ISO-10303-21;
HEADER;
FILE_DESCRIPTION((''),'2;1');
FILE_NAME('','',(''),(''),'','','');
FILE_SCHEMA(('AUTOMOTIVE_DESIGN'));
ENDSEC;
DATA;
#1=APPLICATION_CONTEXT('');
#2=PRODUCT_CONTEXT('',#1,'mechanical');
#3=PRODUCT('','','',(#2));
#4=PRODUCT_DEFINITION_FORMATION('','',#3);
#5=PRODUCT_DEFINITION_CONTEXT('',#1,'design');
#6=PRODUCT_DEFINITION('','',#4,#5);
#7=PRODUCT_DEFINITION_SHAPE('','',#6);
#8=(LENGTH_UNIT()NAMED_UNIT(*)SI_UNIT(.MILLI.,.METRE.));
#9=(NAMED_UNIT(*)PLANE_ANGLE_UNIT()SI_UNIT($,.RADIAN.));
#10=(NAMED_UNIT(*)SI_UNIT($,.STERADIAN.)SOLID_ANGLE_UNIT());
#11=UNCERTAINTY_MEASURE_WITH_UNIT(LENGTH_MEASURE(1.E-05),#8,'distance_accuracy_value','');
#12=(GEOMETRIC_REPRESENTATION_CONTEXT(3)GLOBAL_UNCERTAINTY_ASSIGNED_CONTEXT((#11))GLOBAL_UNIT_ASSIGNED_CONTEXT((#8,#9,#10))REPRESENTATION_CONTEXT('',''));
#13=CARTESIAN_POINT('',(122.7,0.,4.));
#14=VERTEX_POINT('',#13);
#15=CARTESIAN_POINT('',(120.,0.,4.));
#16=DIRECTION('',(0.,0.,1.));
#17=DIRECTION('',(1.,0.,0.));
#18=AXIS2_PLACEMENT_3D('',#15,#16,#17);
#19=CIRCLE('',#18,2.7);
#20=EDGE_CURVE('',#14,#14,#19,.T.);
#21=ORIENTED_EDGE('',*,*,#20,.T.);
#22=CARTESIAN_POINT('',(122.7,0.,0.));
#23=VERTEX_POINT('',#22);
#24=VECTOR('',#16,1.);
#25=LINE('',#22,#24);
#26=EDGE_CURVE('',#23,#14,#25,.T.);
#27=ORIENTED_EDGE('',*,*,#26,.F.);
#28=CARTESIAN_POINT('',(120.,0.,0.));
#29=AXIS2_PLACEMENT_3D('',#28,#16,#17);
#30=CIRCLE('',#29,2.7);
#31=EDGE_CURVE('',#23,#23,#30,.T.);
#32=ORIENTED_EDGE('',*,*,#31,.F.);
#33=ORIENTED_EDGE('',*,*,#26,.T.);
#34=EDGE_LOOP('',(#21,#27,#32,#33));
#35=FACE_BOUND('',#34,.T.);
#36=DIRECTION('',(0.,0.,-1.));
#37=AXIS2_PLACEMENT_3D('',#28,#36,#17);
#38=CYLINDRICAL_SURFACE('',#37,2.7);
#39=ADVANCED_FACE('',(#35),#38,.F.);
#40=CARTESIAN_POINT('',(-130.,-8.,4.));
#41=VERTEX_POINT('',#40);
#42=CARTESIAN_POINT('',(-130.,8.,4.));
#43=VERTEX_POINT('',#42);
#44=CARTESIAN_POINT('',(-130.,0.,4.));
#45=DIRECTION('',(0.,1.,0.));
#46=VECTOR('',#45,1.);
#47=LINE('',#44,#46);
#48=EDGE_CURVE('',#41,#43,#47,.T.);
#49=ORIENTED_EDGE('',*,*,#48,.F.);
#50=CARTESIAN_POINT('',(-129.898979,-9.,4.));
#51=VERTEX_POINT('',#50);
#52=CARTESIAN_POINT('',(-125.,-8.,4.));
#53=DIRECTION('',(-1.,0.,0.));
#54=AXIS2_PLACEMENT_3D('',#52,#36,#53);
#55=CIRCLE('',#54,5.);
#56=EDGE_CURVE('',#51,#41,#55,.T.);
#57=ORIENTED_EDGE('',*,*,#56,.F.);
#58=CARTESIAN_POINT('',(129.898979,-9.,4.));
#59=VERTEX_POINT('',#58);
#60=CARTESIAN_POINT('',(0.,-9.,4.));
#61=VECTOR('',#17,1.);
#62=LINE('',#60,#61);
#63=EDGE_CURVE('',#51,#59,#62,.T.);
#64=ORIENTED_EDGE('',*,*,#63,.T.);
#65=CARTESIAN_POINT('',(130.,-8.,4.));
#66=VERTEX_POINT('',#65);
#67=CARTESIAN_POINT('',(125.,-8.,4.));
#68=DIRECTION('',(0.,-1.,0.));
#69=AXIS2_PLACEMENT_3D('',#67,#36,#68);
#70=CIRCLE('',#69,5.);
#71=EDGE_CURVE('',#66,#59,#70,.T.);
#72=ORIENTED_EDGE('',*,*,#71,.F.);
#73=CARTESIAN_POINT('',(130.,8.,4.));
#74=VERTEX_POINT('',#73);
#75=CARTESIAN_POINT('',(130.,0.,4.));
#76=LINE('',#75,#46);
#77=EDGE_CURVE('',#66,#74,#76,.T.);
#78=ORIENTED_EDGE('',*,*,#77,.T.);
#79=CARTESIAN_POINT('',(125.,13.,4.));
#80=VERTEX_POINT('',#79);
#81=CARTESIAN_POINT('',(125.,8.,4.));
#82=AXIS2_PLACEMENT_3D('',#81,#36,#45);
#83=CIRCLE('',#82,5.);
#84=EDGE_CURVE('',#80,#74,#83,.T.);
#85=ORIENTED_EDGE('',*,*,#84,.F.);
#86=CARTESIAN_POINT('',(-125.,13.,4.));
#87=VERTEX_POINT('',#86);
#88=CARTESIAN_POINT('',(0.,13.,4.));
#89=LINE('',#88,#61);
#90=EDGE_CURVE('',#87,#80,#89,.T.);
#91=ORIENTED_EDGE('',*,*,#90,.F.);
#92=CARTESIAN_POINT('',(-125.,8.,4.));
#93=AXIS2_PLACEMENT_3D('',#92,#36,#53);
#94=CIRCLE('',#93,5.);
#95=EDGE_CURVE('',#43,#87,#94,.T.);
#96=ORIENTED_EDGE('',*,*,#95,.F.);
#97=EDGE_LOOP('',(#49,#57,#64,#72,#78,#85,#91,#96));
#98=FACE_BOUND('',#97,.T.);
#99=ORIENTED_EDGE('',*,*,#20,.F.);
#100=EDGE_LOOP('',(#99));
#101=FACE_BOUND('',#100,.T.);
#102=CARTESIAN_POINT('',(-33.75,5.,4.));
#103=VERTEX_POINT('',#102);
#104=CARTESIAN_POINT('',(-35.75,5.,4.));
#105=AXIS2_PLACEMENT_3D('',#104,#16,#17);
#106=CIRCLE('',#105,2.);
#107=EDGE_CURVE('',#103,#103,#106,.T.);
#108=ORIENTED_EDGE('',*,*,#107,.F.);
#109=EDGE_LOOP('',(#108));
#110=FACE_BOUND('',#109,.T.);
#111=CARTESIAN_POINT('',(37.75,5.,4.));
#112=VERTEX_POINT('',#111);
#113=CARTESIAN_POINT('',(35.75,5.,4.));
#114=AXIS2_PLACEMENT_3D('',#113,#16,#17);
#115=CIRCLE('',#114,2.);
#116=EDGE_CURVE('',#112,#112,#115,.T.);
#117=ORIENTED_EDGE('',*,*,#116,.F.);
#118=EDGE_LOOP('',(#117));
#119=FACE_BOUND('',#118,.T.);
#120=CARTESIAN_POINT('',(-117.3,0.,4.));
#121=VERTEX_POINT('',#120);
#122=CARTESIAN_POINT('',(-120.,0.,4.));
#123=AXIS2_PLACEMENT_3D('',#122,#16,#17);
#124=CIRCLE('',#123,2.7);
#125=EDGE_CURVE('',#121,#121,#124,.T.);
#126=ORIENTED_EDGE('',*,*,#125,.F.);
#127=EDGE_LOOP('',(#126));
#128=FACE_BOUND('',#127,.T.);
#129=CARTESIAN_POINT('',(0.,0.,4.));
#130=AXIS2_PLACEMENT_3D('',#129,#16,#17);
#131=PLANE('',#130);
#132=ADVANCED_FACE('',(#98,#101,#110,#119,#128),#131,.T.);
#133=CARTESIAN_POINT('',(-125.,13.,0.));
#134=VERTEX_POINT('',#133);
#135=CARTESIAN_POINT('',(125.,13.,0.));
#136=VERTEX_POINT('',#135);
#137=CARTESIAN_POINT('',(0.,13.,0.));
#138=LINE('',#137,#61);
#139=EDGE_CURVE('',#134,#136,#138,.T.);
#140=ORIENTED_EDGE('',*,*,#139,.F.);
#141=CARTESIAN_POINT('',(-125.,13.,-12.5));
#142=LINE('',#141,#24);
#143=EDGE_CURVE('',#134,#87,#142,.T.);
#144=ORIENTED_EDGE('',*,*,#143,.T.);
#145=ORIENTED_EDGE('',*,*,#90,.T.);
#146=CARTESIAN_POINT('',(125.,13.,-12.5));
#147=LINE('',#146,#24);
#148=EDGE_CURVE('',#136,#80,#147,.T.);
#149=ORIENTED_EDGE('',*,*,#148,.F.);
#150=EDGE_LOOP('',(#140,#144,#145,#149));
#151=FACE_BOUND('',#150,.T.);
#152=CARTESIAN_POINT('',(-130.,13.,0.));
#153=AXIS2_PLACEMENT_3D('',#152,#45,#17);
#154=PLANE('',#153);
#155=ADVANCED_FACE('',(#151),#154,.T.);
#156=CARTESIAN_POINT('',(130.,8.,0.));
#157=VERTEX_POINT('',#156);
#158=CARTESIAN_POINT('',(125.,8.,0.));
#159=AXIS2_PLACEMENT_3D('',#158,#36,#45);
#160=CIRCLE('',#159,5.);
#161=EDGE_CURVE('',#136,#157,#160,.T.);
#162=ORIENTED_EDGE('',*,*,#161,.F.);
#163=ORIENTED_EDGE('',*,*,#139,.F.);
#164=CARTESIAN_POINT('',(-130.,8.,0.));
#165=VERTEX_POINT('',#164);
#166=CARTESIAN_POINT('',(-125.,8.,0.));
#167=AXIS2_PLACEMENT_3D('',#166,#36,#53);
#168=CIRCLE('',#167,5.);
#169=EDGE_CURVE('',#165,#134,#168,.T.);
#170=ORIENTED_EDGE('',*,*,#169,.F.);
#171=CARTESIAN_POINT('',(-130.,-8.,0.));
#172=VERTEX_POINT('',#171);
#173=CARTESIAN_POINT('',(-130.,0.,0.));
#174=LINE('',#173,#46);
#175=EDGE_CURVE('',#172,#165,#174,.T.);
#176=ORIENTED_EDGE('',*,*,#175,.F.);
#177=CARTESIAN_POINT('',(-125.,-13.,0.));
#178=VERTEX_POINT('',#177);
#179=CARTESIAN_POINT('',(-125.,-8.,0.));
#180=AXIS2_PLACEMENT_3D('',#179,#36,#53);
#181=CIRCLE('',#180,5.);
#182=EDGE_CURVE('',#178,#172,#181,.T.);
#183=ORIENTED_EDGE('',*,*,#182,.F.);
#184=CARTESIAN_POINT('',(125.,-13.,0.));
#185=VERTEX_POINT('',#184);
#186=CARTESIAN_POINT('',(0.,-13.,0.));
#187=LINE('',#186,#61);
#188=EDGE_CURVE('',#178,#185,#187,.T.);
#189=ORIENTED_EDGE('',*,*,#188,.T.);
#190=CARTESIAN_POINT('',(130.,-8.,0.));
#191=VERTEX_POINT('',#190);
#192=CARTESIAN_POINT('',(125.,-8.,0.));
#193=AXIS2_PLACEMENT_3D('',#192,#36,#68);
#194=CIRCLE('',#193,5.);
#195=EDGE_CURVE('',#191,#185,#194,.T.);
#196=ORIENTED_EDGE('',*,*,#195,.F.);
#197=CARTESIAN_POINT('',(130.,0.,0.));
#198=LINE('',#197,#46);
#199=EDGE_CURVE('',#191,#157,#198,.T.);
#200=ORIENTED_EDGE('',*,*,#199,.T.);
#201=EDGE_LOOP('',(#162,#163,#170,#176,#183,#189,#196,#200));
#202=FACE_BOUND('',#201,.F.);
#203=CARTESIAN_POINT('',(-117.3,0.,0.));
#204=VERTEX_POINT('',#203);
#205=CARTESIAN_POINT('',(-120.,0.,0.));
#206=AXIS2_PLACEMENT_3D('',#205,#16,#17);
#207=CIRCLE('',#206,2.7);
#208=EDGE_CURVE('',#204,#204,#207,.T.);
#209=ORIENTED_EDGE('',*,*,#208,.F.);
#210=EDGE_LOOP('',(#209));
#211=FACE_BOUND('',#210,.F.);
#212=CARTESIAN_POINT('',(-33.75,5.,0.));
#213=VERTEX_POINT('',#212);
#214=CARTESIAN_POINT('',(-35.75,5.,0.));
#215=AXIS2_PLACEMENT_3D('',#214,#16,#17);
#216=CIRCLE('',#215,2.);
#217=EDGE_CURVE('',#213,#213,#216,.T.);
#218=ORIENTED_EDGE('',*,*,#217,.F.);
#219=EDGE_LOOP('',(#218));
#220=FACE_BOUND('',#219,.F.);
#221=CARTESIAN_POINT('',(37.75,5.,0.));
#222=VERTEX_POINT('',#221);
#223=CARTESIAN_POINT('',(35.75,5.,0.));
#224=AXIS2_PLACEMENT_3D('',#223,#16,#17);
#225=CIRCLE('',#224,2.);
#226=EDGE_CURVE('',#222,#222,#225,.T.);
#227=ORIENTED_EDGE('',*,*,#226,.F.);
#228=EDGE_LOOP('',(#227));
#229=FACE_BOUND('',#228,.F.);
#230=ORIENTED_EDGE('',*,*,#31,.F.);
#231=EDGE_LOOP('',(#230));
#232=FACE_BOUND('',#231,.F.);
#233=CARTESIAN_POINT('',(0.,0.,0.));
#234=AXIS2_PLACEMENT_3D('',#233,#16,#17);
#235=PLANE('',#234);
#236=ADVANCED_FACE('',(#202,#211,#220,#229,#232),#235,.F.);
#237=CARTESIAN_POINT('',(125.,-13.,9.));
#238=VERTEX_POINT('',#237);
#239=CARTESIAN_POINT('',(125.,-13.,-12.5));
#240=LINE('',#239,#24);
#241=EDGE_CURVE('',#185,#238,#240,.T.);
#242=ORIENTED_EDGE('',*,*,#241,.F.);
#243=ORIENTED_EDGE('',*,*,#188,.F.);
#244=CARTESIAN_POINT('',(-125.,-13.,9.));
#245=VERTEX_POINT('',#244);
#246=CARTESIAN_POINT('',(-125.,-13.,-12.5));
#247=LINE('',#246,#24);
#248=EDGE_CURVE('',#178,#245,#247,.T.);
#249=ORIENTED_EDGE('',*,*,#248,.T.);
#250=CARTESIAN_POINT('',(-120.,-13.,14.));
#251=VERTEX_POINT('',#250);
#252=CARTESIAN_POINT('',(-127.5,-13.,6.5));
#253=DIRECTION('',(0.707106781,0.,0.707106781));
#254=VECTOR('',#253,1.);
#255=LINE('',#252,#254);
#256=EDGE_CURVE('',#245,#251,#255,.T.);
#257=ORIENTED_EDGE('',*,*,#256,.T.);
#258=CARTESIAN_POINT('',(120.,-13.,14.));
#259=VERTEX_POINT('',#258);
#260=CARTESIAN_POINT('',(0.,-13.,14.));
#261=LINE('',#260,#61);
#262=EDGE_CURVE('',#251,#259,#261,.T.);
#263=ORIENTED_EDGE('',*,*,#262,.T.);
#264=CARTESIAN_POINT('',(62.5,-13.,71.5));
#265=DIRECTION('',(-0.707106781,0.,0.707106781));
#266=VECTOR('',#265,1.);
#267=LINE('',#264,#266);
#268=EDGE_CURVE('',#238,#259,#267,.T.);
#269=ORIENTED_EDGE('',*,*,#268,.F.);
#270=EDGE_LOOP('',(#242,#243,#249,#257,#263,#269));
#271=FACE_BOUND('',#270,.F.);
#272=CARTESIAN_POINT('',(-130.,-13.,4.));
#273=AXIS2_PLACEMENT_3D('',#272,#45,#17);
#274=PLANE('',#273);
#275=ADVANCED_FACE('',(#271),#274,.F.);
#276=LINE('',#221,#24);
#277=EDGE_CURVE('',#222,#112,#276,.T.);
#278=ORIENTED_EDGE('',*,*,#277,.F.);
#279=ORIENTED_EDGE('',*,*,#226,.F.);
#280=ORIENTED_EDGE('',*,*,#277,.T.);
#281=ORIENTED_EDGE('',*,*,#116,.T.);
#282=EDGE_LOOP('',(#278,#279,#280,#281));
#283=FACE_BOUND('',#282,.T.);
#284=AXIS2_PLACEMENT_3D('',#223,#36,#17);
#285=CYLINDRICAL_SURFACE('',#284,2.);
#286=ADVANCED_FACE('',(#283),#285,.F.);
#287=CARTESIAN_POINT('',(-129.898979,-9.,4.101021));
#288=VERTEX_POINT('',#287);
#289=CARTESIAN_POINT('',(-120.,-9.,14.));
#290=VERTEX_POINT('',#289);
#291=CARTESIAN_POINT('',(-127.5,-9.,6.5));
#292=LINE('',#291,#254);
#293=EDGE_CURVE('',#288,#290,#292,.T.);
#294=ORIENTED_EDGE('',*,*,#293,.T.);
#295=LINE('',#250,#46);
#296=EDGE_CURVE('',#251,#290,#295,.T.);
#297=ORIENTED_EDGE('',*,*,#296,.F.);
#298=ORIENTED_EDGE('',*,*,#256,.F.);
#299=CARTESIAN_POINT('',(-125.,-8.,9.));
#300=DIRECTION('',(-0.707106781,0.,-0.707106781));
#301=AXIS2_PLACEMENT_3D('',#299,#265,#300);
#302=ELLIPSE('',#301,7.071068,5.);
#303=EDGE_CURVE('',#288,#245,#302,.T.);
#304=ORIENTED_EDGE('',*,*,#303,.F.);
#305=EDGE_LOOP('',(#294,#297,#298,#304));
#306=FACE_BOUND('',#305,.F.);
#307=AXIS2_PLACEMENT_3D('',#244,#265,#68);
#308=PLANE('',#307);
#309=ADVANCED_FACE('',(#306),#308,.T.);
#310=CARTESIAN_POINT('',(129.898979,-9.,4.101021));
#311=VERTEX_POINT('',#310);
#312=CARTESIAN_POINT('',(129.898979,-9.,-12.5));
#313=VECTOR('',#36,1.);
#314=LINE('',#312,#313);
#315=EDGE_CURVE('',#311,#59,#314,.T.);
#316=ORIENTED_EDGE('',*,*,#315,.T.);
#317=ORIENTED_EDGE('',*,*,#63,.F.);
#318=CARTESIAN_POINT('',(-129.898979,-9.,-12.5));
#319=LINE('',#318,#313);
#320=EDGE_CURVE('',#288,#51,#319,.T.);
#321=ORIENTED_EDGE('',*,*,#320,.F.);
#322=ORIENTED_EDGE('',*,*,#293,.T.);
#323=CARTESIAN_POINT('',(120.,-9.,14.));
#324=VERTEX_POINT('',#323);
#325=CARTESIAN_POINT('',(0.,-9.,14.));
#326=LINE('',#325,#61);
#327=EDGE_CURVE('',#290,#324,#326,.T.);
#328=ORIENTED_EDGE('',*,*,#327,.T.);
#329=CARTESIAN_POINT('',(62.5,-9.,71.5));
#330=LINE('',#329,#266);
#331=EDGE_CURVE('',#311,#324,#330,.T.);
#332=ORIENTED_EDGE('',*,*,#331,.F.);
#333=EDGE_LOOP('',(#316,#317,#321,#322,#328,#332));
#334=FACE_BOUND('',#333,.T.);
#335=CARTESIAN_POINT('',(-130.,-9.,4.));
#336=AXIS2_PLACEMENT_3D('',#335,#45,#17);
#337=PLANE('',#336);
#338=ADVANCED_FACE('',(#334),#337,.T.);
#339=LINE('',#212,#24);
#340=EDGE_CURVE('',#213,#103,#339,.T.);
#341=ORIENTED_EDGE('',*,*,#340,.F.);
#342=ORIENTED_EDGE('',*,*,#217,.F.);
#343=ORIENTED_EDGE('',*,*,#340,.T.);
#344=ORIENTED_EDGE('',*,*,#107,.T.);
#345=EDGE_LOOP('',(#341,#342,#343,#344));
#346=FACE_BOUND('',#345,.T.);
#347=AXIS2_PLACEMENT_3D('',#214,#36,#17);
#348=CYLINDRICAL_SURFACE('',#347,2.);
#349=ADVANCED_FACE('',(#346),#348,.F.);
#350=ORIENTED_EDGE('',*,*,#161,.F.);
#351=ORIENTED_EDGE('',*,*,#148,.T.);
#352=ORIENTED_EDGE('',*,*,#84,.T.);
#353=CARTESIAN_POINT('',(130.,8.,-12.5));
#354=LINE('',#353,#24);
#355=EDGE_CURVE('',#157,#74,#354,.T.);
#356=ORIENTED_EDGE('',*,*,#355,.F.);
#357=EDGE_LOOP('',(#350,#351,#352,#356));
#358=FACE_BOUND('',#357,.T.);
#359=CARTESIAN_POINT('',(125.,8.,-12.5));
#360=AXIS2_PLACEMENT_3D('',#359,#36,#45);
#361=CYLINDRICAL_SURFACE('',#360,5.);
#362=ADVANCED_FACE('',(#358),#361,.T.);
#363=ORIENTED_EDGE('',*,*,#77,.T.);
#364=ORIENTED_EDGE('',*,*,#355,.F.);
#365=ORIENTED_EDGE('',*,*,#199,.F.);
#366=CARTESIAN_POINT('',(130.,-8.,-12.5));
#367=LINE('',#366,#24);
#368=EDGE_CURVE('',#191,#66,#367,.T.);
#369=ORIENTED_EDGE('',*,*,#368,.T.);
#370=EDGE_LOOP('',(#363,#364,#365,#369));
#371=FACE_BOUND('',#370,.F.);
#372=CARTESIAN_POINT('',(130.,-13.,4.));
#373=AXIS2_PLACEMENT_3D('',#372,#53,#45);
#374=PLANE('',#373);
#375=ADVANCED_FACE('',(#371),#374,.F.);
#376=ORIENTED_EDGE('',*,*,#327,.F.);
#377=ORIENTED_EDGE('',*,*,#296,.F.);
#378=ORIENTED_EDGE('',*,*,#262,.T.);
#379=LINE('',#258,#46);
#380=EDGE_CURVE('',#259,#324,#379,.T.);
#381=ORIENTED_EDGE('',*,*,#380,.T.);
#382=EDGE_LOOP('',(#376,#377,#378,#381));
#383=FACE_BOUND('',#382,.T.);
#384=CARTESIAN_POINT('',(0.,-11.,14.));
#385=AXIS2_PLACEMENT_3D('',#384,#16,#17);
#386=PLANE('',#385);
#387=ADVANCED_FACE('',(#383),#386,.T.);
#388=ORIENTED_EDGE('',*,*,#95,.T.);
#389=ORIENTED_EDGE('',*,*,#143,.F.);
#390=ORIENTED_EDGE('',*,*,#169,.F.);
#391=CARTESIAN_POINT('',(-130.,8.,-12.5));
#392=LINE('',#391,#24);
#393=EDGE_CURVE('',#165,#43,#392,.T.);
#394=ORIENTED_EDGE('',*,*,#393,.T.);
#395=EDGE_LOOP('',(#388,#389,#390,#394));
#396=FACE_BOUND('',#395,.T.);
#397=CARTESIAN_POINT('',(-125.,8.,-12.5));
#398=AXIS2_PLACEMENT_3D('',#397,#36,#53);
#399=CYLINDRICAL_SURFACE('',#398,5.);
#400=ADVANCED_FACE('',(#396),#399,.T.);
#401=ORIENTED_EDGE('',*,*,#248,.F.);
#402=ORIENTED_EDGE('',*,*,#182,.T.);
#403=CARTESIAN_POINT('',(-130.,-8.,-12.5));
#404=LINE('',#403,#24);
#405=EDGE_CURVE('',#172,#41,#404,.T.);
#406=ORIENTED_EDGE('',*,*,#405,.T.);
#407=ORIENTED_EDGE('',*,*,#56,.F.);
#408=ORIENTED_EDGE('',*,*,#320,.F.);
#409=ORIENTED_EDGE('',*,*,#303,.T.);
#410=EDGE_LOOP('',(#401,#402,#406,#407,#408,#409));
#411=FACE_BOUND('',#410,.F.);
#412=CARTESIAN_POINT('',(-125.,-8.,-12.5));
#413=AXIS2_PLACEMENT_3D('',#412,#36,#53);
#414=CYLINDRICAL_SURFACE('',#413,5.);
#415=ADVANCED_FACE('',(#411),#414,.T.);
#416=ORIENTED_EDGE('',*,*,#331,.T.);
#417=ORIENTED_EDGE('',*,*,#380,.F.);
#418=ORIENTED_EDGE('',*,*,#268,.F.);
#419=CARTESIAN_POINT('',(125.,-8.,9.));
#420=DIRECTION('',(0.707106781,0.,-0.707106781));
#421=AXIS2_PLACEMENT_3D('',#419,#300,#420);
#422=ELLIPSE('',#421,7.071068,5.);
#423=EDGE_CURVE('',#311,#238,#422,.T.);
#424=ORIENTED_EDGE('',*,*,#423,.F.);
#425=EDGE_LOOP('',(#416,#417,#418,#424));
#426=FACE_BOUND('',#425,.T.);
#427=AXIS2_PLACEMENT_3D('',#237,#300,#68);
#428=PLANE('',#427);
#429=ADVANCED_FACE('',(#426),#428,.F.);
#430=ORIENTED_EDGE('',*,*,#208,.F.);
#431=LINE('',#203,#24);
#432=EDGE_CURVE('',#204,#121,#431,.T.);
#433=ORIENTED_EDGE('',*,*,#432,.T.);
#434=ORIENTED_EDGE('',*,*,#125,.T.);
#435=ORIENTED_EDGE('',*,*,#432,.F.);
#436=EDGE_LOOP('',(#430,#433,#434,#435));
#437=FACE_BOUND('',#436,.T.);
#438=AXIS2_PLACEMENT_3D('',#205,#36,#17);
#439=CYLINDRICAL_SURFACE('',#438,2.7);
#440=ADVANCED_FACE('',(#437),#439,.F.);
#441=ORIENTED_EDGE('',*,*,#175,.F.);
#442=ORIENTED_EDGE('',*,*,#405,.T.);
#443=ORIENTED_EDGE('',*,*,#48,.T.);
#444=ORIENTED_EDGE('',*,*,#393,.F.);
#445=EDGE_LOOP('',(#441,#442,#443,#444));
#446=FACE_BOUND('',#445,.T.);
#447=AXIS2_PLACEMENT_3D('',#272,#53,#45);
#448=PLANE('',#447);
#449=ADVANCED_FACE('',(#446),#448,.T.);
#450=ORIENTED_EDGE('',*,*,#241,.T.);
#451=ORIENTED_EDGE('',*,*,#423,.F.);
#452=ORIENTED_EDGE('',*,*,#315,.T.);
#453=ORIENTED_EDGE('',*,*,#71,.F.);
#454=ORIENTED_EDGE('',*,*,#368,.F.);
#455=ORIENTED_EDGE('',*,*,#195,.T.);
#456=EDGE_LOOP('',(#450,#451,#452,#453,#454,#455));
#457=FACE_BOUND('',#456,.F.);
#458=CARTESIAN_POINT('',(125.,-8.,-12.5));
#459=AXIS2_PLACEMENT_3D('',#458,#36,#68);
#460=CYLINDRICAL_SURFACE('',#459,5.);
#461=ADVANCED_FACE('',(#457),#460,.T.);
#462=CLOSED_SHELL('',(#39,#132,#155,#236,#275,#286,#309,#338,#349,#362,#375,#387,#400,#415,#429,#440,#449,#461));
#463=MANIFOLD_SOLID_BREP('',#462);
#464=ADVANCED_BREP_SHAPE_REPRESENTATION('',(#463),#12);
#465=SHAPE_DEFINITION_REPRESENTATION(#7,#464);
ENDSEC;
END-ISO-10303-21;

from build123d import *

# Parameters (mm, degrees)
F0_W        = 260
F0_H        = 26
F0_R        = 2.7
F0_R_2      = 2
F1_DEPTH    = 4
F2_W        = 260
F2_H        = 4
F3_DEPTH    = 10
F4_SIZE     = 10
F5_T1_DEPTH = 29


# Not quite as in the source:
# - a fillet or chamfer that OpenCascade refuses, or shapes differently, is made with other operations: its cross-section is extruded or revolved along the edge and cut away or added


with BuildPart() as f1:
    # F0 (on Top) → F1 (new body)
    with BuildSketch(Plane.XY):
        Rectangle(F0_W, F0_H)
        with Locations((-120, 0)):
            Circle(F0_R, mode=Mode.SUBTRACT)
        with Locations((-35.75, 5)):
            Circle(F0_R_2, mode=Mode.SUBTRACT)
        with Locations((35.75, 5)):
            Circle(F0_R_2, mode=Mode.SUBTRACT)
        with Locations((120, 0)):
            Circle(F0_R, mode=Mode.SUBTRACT)
    extrude(amount=F1_DEPTH)

    # F2 (on face) → F3 (join)
    with BuildSketch(Plane.XY.offset(4)):
        with Locations((0, -11)):
            Rectangle(F2_W, F2_H)
    extrude(amount=F3_DEPTH)

    # F4
    f4_edges = [f1.edges().sort_by_distance(p)[0] for p in [
        (-130, -11, 14),
        (130, -11, 14),
    ]]
    chamfer(f4_edges, length=F4_SIZE)

    # F5: fillet of radius 5 on 4 edges, made by hand

    # F5_s2 → F5_t1 (cut)
    with BuildSketch(Plane.XY.offset(-12.5)):
        with BuildLine():
            ThreePointArc((125, 13), (128.5355339059, 11.5355339059), (130, 8))
            Line((130, 8), (130, 13))
            Line((130, 13), (125, 13))
        make_face()
        with BuildLine():
            ThreePointArc((125, -13), (128.5355339059, -11.5355339059), (130, -8))
            Line((130, -8), (130, -13))
            Line((130, -13), (125, -13))
        make_face()
        with BuildLine():
            ThreePointArc((-130, 8), (-128.5355339059, 11.5355339059), (-125, 13))
            Line((-125, 13), (-130, 13))
            Line((-130, 13), (-130, 8))
        make_face()
        with BuildLine():
            ThreePointArc((-130, -8), (-128.5355339059, -11.5355339059), (-125, -13))
            Line((-125, -13), (-130, -13))
            Line((-130, -13), (-130, -8))
        make_face()
    extrude(amount=F5_T1_DEPTH, mode=Mode.SUBTRACT)


solid = f1.part
